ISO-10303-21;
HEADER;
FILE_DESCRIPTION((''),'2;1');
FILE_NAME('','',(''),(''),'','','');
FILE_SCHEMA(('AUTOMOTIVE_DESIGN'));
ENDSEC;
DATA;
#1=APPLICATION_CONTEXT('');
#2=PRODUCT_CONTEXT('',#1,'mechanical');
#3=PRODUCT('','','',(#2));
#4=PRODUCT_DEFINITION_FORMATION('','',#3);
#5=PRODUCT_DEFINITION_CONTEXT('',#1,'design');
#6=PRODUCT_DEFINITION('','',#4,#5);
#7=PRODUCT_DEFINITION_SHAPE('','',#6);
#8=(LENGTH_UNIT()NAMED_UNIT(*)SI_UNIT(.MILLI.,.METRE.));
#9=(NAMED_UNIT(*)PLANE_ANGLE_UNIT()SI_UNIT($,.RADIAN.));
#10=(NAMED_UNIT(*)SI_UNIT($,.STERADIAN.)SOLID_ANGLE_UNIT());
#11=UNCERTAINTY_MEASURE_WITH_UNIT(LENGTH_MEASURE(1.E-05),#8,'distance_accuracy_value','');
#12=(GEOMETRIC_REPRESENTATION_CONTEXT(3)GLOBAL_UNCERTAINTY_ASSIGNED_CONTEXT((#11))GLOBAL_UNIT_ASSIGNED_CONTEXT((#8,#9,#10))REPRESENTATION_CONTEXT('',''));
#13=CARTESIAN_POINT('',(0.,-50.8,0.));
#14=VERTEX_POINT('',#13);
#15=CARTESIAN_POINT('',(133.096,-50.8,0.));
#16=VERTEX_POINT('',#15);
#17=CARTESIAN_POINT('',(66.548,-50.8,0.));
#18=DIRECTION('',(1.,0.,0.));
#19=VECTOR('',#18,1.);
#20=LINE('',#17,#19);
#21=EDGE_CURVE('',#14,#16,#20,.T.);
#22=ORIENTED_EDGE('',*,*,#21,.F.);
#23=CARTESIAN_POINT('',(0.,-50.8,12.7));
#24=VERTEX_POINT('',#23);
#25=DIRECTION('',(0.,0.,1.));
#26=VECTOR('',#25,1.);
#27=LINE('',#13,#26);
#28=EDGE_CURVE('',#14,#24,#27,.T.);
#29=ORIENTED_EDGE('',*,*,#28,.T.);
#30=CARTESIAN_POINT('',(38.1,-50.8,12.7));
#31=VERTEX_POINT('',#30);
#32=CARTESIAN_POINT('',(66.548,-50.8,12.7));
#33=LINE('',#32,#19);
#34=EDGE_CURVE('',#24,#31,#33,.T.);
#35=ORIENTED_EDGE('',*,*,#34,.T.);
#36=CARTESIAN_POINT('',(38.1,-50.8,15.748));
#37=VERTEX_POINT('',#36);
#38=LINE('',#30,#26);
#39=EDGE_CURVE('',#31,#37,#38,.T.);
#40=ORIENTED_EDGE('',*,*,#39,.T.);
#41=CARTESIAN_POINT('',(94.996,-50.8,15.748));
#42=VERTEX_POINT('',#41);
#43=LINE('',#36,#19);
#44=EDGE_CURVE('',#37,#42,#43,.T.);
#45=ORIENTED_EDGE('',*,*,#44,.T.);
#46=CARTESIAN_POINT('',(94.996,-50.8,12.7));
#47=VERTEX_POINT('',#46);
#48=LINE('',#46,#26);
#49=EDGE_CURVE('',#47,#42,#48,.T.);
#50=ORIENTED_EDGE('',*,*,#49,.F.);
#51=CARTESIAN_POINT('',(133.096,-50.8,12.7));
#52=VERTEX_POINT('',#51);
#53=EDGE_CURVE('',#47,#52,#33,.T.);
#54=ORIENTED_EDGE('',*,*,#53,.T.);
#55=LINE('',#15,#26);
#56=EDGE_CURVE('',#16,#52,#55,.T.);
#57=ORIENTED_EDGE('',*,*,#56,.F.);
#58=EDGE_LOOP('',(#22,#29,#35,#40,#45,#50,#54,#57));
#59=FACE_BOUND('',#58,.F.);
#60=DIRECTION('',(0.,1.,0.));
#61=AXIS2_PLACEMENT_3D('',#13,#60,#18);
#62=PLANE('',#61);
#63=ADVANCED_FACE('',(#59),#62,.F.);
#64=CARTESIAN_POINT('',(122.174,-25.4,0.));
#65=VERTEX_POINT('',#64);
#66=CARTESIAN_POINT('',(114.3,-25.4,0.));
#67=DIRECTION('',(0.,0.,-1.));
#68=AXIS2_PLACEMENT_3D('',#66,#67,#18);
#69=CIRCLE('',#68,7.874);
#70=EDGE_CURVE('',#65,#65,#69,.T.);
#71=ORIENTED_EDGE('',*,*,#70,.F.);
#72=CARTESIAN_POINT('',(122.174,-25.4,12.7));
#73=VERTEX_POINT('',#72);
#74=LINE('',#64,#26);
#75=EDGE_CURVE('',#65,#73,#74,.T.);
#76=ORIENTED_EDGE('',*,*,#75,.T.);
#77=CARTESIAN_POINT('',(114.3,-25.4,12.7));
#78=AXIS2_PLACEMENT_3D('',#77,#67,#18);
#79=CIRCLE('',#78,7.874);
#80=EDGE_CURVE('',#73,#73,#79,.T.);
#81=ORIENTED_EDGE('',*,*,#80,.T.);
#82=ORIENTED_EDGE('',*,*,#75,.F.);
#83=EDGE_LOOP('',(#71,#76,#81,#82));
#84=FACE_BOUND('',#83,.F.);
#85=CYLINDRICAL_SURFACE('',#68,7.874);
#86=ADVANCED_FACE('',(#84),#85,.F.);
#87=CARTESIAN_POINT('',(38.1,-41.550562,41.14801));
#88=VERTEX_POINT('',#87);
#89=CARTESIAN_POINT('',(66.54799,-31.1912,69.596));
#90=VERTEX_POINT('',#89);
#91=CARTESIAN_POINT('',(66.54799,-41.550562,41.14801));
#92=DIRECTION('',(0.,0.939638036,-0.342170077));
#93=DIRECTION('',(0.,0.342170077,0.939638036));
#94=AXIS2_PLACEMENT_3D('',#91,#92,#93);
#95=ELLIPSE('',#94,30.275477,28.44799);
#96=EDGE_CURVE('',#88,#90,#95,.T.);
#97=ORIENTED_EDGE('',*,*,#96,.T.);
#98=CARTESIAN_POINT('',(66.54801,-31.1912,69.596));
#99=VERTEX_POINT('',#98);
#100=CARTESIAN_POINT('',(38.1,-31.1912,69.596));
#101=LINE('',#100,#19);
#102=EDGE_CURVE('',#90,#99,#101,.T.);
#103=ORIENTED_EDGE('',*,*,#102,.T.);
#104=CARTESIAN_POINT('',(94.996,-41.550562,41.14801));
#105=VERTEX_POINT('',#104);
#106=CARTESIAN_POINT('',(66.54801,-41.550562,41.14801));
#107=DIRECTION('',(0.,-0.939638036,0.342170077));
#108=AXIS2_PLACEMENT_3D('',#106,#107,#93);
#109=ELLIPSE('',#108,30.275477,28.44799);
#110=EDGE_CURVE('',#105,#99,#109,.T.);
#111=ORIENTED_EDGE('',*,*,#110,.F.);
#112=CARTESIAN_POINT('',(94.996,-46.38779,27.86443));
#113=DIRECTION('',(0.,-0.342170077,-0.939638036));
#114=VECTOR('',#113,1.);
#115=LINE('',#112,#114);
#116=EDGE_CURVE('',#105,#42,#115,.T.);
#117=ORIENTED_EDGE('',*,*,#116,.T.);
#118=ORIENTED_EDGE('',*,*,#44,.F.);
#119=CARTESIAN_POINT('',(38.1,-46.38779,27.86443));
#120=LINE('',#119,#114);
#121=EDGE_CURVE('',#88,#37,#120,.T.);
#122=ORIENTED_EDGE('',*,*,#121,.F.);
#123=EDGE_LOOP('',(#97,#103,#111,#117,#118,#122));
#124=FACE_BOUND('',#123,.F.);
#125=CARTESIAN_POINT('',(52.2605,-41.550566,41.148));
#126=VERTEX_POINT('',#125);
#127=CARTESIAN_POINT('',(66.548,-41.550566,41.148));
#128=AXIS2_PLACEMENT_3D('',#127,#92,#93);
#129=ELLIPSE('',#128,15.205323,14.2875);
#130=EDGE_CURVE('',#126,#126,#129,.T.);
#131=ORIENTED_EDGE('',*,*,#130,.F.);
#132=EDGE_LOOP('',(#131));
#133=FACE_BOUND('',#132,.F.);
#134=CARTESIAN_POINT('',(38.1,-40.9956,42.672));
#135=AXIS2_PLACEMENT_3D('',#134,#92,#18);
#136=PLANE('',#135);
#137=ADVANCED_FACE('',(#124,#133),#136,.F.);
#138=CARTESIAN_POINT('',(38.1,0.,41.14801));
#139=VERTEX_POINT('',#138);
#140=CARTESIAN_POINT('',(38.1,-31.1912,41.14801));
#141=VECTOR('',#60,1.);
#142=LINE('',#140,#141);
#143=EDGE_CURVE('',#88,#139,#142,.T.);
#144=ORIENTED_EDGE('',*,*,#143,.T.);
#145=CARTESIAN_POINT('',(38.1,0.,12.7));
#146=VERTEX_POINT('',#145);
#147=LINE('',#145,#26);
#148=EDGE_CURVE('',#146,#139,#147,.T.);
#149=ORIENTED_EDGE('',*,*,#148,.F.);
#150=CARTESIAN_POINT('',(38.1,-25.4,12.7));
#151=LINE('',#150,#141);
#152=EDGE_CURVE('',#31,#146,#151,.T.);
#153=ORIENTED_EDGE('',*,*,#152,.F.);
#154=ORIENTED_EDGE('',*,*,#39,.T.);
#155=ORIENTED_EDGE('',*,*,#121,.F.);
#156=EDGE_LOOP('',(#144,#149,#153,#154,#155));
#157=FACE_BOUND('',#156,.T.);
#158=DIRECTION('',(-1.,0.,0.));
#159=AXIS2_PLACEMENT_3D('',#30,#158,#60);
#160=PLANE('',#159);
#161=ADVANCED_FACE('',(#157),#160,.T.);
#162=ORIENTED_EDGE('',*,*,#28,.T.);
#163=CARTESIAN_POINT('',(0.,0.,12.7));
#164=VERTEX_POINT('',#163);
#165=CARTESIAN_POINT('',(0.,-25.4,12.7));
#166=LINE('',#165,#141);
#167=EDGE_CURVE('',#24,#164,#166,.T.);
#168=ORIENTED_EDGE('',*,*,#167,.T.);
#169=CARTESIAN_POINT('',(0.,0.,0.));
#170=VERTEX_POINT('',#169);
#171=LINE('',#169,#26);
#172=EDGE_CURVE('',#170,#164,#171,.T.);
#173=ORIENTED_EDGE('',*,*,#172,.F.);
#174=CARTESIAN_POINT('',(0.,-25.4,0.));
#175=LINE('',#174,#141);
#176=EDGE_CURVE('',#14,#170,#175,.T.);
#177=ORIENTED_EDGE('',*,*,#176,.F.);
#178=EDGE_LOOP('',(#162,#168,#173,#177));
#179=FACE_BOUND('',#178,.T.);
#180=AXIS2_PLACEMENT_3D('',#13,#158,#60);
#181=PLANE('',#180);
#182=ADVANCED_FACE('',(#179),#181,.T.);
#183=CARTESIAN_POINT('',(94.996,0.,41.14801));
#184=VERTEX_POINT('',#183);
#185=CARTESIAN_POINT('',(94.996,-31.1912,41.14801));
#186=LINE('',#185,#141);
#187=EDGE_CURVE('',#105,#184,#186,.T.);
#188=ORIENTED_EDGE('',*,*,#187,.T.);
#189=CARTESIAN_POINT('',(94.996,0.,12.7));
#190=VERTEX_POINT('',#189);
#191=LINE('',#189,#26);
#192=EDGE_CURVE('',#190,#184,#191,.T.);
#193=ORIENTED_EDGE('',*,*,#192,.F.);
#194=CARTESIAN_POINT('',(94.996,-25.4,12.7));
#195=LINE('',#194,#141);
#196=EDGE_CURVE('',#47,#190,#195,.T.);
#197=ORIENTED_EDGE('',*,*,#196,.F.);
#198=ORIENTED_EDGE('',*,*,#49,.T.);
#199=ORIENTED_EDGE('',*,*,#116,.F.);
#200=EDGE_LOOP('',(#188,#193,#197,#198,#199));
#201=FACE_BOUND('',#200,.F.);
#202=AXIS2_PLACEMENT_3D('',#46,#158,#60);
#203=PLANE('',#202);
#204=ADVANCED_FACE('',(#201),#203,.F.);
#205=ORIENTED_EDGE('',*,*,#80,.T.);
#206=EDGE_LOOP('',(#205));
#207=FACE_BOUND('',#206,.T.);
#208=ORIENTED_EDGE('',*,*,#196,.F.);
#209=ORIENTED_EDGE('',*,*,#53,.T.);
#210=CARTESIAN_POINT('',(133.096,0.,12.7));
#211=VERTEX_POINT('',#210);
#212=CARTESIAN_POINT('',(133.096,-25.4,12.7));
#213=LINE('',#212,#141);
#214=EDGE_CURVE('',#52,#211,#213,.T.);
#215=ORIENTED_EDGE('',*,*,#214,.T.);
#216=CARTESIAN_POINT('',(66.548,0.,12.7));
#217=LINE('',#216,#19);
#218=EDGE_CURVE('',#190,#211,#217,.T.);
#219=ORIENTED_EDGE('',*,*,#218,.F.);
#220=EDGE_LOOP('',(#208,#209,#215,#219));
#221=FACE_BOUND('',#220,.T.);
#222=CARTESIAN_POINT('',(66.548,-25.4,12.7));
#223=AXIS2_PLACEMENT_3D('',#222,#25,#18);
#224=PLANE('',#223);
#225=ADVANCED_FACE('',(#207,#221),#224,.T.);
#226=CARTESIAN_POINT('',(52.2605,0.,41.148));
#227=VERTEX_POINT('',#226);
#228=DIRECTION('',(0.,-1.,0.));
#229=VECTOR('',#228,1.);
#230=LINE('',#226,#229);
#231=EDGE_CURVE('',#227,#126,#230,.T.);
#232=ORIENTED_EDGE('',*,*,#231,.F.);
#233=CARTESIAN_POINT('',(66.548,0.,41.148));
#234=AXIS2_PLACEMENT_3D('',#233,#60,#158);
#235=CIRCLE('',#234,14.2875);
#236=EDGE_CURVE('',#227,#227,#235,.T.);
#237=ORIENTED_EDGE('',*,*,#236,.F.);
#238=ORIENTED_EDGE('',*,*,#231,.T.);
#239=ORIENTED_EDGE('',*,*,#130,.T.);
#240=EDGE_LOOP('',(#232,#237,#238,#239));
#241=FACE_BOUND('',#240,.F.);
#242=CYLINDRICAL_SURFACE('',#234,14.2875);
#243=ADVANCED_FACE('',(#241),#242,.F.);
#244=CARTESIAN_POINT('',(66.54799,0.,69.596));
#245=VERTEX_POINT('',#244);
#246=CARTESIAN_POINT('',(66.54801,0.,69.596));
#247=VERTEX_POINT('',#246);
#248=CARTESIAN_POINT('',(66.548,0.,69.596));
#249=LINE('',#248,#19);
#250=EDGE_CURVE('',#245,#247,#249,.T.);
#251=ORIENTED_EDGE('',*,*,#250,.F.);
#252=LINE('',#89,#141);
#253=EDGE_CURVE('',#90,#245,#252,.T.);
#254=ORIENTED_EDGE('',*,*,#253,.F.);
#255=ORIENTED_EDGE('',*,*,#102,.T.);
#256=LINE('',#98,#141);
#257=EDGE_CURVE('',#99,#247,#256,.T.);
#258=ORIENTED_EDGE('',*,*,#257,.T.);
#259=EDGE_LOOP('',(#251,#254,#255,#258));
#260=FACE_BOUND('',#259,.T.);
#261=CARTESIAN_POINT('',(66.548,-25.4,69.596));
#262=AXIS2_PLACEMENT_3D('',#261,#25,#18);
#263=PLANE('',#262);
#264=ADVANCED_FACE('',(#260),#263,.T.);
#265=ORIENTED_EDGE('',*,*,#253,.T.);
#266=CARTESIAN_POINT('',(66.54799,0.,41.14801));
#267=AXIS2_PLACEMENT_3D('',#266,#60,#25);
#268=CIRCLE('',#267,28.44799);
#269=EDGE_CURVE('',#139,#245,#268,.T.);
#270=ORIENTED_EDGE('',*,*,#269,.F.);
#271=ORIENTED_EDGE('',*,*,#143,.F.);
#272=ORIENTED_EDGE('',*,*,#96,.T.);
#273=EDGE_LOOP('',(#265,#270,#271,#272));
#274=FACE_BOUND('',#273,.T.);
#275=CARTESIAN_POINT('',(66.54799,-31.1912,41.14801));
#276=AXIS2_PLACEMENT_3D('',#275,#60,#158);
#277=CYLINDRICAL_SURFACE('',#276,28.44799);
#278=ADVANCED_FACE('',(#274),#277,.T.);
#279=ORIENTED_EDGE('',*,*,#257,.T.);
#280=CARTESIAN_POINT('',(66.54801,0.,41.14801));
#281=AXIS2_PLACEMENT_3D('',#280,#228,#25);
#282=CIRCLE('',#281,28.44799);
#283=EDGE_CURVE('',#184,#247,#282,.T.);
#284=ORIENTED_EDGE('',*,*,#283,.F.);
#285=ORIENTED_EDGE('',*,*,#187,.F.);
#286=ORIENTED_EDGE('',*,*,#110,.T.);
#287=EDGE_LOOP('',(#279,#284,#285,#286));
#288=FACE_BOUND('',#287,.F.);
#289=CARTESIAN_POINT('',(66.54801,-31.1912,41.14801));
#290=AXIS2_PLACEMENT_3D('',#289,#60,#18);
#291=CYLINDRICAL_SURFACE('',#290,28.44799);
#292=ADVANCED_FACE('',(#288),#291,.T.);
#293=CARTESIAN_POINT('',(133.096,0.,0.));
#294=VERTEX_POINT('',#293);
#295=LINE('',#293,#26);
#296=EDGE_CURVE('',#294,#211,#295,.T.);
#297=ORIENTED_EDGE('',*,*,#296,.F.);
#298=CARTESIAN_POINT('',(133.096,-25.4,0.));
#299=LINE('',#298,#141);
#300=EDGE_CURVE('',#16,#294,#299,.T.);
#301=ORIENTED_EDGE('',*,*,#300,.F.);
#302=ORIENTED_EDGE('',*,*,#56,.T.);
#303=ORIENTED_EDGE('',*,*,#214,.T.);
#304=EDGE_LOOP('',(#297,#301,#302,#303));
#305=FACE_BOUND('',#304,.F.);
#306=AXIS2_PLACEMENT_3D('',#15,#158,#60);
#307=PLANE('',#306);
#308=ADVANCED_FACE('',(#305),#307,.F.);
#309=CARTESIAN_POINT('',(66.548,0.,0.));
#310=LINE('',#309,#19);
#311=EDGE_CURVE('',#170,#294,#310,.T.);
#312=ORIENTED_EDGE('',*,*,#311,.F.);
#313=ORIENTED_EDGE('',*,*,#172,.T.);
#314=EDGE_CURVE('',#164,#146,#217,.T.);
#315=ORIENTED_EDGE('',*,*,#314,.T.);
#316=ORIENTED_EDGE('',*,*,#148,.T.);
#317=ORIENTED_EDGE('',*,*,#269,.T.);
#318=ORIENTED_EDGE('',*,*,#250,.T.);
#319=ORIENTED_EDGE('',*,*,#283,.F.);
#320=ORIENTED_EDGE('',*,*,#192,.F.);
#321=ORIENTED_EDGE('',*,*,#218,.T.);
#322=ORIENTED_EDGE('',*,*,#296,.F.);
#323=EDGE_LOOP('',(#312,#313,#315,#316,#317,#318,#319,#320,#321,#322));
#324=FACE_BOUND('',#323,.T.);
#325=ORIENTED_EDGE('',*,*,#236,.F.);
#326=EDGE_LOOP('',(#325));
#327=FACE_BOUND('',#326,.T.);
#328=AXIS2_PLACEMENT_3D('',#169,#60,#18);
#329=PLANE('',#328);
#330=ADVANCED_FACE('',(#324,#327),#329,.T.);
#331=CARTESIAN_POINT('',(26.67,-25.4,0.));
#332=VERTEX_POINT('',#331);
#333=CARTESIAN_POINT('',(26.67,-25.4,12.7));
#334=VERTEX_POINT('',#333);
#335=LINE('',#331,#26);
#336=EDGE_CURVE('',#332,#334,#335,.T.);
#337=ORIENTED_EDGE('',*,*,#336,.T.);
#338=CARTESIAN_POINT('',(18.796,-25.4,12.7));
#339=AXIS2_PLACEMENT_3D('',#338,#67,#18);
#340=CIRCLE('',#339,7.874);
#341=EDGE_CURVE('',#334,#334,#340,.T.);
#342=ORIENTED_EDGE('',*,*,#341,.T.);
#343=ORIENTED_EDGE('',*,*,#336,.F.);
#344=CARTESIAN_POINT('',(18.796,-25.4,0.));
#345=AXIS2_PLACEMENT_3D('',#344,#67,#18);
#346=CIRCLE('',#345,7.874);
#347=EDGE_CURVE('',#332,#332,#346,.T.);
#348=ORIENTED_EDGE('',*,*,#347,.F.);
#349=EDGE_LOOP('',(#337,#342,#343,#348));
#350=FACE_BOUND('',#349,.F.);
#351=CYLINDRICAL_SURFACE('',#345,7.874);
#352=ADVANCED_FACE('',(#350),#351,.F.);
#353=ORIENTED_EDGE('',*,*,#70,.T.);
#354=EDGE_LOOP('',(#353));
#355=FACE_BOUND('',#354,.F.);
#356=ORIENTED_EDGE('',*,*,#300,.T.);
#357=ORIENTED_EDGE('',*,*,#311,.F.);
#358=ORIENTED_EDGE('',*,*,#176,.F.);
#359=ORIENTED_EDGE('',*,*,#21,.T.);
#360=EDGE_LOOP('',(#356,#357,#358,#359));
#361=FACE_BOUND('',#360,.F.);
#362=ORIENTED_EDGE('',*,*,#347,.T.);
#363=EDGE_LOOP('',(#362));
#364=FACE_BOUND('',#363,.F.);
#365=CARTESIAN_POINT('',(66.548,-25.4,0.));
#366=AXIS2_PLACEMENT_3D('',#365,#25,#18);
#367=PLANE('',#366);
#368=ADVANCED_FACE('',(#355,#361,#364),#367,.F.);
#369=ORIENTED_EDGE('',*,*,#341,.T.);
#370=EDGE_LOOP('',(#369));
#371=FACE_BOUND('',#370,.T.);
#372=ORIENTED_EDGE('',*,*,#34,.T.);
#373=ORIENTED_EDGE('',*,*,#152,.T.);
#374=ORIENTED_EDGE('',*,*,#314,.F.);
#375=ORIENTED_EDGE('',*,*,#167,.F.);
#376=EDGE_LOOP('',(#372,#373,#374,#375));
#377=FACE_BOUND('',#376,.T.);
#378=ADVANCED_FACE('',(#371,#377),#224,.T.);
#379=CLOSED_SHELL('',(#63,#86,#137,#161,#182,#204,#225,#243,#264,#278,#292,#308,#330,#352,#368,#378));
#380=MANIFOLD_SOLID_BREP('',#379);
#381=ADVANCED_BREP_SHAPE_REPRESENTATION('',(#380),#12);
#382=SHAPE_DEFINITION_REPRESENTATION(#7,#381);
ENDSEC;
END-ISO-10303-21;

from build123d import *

# Parameters (mm, degrees)
F0_W      = 133.096
F0_H      = 50.8
F1_DEPTH  = 12.7
F2_W      = 56.896
F2_H      = 50.8
F3_DEPTH  = 56.896
F4_SIZE2  = 53.848
F4_SIZE   = 19.6088
F5_R      = 14.2875
F6_DEPTH  = 50.8
F7_R      = 28.44799
F9_R      = 7.874
F8_R      = 7.874
F10_DEPTH = 25.4


# Not quite as in the source:
# - a fillet or chamfer is up to 0.001 mm smaller than in the source, because OpenCascade refuses the exact size


with BuildPart() as f1:
    # F0 (on Top) → F1 (new body)
    with BuildSketch(Plane.XY):
        with Locations((66.548, -25.4)):
            Rectangle(F0_W, F0_H)
    extrude(amount=F1_DEPTH)

    # F2 (on face) → F3 (join)
    with BuildSketch(Plane.XY.offset(12.7)):
        with Locations((66.548, -25.4)):
            Rectangle(F2_W, F2_H)
    extrude(amount=F3_DEPTH)

    # F4
    f4_edges = [f1.edges().sort_by_distance(p)[0] for p in [
        (66.548, -50.8, 69.596),
    ]]
    f4_side = f1.faces().sort_by_distance((66.548, -25.4, 69.596))[0]
    chamfer(f4_edges, length=F4_SIZE, length2=F4_SIZE2, reference=f4_side)

    # F5 (on face) → F6 (cut)
    with BuildSketch(Plane(origin=(0, 0, 0), x_dir=(-1, 0, 0), z_dir=(0, 1, 0))):
        with Locations((-66.548, 41.148)):
            Circle(F5_R)
    extrude(amount=-F6_DEPTH, mode=Mode.SUBTRACT)

    # F7 (radius 28.448 in the source; OpenCascade refuses exactly that, so slightly less here)
    f7_edges = [f1.edges().sort_by_distance(p)[0] for p in [
        (94.996, -15.5956, 69.596),
        (38.1, -15.5956, 69.596),
    ]]
    fillet(f7_edges, radius=F7_R)

    # F9 (on face) + F8 (on face) → F10 (cut)
    with BuildSketch(Plane(origin=(0, 0, 0), x_dir=(1, 0, 0), z_dir=(0, 0, -1))):
        with Locations((18.796, 25.4)):
            Circle(F9_R)
    with BuildSketch(Plane(origin=(0, 0, 0), x_dir=(1, 0, 0), z_dir=(0, 0, -1))):
        with Locations((114.3, 25.4)):
            Circle(F8_R)
    extrude(amount=-F10_DEPTH, mode=Mode.SUBTRACT)


solid = f1.part
